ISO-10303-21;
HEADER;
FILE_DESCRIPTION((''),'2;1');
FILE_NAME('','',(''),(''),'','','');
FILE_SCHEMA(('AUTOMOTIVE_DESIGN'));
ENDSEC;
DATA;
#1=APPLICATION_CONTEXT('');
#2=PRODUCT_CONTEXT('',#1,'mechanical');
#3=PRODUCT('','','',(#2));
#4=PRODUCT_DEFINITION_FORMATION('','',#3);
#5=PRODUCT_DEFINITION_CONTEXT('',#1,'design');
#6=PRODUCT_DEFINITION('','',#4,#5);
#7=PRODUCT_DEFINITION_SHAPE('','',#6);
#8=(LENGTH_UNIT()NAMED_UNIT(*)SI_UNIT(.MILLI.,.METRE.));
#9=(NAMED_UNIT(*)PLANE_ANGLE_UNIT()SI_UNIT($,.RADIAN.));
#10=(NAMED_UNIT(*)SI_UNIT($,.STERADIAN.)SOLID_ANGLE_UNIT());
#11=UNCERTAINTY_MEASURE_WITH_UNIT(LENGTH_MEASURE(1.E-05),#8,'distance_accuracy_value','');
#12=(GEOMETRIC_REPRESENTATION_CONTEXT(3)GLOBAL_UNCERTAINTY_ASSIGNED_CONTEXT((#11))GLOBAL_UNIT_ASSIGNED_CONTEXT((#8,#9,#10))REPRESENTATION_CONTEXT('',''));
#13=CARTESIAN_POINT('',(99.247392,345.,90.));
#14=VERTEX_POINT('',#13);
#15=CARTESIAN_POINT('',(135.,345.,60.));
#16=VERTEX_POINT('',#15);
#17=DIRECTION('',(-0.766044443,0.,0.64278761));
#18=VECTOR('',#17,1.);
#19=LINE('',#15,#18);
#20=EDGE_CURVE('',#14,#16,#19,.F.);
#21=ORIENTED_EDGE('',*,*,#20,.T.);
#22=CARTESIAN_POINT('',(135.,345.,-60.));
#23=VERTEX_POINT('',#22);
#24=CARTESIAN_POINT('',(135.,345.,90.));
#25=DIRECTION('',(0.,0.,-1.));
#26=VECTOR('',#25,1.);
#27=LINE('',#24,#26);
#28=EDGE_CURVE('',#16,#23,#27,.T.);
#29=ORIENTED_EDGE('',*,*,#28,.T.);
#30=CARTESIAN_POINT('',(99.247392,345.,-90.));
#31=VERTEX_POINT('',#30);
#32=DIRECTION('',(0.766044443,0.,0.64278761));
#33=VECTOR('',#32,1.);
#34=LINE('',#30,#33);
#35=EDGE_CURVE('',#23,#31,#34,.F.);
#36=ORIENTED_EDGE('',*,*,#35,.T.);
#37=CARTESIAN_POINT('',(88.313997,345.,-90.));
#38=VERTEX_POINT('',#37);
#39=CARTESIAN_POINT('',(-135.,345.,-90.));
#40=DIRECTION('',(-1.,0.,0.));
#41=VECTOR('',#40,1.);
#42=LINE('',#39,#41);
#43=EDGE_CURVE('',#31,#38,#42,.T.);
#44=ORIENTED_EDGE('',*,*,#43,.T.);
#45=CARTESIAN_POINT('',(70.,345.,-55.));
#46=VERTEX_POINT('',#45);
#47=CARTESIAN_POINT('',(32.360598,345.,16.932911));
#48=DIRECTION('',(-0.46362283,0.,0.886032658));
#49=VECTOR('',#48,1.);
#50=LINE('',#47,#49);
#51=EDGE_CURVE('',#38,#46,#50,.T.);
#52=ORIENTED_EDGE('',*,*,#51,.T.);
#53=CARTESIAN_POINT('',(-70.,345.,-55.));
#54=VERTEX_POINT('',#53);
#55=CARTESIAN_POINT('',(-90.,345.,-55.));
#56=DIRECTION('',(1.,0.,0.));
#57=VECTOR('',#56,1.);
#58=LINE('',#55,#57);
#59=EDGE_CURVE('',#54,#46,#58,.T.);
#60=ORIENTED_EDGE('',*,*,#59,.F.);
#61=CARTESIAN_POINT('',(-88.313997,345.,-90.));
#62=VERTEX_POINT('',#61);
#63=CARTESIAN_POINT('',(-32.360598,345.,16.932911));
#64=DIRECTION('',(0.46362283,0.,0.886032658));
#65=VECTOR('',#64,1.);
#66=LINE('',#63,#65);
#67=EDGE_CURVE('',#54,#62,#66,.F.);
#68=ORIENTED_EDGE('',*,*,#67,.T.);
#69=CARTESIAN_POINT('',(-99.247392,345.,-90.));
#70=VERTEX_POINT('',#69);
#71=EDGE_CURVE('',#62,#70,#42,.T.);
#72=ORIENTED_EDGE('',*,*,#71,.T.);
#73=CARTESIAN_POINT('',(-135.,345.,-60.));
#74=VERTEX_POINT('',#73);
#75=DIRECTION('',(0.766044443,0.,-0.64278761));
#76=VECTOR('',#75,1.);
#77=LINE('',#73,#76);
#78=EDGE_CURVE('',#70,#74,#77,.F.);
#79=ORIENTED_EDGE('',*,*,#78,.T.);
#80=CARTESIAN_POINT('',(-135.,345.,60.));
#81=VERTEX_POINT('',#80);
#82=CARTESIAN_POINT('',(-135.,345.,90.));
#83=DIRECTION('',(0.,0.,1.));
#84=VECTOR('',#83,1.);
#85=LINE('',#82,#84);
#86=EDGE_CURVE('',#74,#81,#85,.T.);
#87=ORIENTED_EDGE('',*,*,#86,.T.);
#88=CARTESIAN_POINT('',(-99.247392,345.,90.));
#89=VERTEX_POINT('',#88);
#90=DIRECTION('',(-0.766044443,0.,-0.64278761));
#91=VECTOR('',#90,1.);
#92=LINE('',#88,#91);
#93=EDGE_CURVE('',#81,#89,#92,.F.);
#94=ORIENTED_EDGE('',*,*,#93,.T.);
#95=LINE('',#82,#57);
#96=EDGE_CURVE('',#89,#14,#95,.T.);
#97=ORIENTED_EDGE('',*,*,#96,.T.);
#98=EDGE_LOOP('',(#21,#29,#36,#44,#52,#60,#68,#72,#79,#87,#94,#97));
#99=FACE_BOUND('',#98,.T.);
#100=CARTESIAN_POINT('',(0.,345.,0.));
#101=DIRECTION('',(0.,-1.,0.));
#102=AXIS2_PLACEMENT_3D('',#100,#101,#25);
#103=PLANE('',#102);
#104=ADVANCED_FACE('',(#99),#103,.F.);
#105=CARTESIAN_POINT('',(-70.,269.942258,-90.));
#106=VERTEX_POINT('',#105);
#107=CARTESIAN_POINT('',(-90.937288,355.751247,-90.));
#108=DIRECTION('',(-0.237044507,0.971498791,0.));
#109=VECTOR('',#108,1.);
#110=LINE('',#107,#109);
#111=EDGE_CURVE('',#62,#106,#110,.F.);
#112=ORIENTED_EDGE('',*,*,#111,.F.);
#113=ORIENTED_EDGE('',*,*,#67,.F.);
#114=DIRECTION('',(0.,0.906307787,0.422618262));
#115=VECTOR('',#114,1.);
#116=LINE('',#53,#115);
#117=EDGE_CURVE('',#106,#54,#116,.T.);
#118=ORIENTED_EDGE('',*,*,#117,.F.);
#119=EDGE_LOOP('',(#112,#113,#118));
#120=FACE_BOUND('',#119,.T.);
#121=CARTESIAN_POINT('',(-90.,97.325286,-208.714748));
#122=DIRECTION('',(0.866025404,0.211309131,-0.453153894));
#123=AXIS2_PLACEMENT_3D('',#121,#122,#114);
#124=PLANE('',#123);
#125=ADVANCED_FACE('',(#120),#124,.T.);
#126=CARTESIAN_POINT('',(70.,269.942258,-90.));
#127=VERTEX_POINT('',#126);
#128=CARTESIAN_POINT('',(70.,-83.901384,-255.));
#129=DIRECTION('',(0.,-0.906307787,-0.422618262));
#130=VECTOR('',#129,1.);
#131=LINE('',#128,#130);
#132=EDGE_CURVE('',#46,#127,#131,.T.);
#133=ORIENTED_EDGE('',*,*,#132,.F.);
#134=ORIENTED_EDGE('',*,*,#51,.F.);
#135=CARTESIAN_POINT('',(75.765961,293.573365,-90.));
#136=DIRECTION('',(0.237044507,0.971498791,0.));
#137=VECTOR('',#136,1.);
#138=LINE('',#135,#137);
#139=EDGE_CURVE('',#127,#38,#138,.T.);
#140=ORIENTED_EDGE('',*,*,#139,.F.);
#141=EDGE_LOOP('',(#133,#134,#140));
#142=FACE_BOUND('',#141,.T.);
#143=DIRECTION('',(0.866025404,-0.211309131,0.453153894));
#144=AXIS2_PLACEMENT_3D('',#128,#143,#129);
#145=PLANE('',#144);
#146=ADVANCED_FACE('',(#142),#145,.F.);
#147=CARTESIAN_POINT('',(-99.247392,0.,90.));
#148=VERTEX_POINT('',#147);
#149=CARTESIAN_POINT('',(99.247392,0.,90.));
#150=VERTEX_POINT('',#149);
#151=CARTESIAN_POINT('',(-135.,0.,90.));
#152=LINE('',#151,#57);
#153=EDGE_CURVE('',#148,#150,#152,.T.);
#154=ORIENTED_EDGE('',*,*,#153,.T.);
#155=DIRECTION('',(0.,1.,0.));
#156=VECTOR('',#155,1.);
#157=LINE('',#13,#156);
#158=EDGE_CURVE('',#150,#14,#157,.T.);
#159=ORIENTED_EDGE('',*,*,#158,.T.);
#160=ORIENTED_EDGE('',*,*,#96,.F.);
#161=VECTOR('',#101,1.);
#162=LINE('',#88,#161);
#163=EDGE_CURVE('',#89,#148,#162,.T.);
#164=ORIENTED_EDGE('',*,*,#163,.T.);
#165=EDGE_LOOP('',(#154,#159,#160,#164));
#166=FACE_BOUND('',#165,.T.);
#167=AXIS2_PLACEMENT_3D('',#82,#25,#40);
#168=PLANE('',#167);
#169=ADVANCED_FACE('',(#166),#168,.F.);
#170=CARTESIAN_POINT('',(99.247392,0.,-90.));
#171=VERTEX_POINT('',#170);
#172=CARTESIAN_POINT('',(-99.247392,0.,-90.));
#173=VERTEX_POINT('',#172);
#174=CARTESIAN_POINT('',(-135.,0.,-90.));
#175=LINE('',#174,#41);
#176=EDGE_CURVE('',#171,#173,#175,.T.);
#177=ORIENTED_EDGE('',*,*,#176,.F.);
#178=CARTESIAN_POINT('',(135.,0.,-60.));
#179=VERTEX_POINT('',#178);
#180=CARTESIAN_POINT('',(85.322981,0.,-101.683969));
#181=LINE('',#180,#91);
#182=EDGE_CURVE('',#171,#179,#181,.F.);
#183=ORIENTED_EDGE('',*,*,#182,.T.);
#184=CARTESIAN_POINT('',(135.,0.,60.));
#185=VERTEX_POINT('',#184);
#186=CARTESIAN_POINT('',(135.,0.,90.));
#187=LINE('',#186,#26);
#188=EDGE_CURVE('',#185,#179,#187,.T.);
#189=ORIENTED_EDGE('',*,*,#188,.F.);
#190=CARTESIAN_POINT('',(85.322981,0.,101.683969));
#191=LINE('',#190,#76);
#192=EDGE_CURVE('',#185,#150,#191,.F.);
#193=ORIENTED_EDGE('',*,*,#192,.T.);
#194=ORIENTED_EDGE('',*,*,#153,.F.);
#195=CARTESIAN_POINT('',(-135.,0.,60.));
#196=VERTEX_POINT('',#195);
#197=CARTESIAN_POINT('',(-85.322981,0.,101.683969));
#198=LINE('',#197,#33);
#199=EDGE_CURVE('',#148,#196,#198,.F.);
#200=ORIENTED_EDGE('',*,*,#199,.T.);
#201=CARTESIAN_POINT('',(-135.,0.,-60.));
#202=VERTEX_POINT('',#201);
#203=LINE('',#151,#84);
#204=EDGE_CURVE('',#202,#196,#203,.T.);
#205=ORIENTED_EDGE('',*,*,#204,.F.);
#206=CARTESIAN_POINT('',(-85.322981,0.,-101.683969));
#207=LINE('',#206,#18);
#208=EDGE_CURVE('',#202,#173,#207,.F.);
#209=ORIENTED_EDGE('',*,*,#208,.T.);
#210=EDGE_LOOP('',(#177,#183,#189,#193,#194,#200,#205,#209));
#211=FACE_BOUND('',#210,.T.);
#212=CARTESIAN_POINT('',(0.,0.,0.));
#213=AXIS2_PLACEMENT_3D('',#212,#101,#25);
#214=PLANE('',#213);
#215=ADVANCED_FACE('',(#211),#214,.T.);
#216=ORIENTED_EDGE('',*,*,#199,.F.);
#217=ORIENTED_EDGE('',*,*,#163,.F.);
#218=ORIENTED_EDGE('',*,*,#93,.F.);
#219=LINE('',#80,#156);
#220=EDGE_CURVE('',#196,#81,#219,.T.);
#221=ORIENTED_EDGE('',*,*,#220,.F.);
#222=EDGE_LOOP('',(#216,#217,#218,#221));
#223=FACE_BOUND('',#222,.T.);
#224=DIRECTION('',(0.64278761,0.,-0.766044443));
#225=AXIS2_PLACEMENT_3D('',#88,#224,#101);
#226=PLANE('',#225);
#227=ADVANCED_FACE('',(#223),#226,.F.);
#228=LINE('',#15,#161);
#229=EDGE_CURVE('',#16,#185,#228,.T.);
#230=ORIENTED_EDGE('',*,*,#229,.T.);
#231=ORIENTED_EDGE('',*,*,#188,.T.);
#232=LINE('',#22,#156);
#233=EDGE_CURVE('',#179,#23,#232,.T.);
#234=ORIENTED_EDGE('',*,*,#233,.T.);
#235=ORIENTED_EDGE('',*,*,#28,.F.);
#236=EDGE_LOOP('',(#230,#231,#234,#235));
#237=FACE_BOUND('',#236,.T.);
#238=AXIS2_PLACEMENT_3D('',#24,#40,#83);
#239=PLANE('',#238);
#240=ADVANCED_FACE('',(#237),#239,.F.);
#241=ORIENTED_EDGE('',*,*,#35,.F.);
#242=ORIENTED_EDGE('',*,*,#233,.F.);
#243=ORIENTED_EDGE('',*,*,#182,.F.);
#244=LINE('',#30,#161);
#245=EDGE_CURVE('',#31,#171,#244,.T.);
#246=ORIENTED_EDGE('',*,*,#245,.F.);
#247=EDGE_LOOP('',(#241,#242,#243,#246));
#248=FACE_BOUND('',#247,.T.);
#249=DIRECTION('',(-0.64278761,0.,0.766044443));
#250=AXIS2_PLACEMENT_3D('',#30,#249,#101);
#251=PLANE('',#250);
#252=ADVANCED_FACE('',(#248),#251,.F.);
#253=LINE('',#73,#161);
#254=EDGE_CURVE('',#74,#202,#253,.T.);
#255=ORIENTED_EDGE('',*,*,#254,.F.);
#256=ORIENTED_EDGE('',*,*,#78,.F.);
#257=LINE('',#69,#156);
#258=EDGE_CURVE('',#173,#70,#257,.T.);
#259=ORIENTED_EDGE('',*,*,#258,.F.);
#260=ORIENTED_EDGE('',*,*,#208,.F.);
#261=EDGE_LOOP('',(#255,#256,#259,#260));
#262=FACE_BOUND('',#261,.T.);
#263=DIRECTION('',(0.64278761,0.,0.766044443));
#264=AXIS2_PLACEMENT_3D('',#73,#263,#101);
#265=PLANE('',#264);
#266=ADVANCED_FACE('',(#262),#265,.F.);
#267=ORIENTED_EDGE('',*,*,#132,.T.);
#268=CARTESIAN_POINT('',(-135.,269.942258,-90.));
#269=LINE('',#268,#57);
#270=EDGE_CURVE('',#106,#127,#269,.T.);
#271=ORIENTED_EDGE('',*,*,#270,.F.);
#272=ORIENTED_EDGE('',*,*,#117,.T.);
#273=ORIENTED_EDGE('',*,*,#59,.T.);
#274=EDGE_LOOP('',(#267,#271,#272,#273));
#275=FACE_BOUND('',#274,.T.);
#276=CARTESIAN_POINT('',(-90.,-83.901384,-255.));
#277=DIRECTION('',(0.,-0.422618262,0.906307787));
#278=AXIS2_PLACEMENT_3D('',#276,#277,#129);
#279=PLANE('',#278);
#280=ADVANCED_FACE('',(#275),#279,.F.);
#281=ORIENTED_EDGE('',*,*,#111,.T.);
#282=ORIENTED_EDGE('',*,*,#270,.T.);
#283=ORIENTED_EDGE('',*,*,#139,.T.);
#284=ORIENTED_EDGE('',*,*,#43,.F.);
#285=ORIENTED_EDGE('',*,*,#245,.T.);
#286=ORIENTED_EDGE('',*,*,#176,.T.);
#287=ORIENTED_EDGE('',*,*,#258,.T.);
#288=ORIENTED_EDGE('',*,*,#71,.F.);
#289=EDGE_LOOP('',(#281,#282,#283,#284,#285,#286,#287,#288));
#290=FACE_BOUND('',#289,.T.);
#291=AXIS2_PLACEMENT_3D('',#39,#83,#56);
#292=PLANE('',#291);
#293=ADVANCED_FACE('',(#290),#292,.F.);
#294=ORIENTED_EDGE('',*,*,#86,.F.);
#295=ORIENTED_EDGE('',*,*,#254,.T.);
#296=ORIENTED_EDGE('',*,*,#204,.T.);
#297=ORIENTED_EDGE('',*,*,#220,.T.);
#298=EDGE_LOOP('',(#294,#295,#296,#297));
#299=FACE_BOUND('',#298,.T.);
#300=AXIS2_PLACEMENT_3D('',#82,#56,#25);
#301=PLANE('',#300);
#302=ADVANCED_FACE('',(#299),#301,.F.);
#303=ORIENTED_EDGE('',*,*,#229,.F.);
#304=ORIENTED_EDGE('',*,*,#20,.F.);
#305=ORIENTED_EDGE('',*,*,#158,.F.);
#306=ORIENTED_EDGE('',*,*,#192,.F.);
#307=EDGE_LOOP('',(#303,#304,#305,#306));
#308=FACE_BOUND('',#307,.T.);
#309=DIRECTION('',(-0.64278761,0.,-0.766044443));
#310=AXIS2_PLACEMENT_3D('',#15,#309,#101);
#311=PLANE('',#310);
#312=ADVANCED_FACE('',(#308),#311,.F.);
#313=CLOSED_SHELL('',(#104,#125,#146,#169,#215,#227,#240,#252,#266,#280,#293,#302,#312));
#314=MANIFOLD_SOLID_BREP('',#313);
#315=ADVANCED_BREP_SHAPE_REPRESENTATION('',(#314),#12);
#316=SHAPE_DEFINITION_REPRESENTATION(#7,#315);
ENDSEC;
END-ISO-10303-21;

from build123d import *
from OCP.BRepFilletAPI import BRepFilletAPI_MakeChamfer

# Parameters (mm, degrees)
ESQUISSE1_W             = 270
ESQUISSE1_H             = 180
BOSS_EXTRU_1_DEPTH      = 345
CHANFREIN1_SIZE         = 30
CHANFREIN1_SIZE2        = 35.752607778
ENL_V_MAT_EXTRU_1_DEPTH = 90
CHANFREIN2_SIZE         = 20
CHANFREIN2_SIZE_2       = 34.641016151


with BuildPart() as part:
    # Esquisse1 → Boss.-Extru.1 (new body)
    with BuildSketch(Plane(origin=(0, 0, 0), x_dir=(1, 0, 0), z_dir=(0, 1, 0))):
        Rectangle(ESQUISSE1_W, ESQUISSE1_H)
    extrude(amount=BOSS_EXTRU_1_DEPTH)

    # Chanfrein1: one chamfer whose edges measure the first distance from different faces: ONE call of the kernel's chamfer builder (chamfer() names one face for all edges)
    chanfrein1_edges_1 = [part.edges().sort_by_distance(p)[0] for p in [
        (135, 172.5, 90),
        (135, 172.5, -90),
    ]]
    chanfrein1_side_1 = [part.faces().sort_by_distance(p)[0] for p in [
        (135, 172.5, 0),
    ]]
    chanfrein1_edges_2 = [part.edges().sort_by_distance(p)[0] for p in [
        (-135, 172.5, 90),
        (-135, 172.5, -90),
    ]]
    chanfrein1_side_2 = [part.faces().sort_by_distance(p)[0] for p in [
        (-135, 172.5, 0),
    ]]
    chanfrein1 = BRepFilletAPI_MakeChamfer(part.part.solid().wrapped)
    for e in chanfrein1_edges_1:
        chanfrein1.Add(CHANFREIN1_SIZE, CHANFREIN1_SIZE2, e.wrapped, chanfrein1_side_1[0].wrapped)  # the first distance lies on this face
    for e in chanfrein1_edges_2:
        chanfrein1.Add(CHANFREIN1_SIZE, CHANFREIN1_SIZE2, e.wrapped, chanfrein1_side_2[0].wrapped)  # the first distance lies on this face
    add(Compound.cast(chanfrein1.Shape()), mode=Mode.REPLACE)

    # Esquisse2 → Enlèv. mat.-Extru.1 (cut, symmetric)
    with BuildSketch(Plane(origin=(0, 0, 0), x_dir=(0, 0, -1), z_dir=(1, 0, 0))):
        Polygon((55, 345), (255, 345), (255, -83.901384102), align=None)
    extrude(amount=ENL_V_MAT_EXTRU_1_DEPTH, both=True, mode=Mode.SUBTRACT)

    # Chanfrein2
    # the kernel refuses this chamfer: 34.641016151, 20 mm, written as the material it adds along each edge
    with BuildSketch(Plane(origin=(90, 188.719606983, -127.874744083), x_dir=(-0.9983227437537926, -0.02446700349407226, 0.05246965831716883), z_dir=(0, 0.9063077870366479, 0.422618261740704))) as chanfrein2_piece_1_section:
        Polygon((CHANFREIN2_SIZE * 0.998322743754, -CHANFREIN2_SIZE * 0.0578938624027), (-CHANFREIN2_SIZE_2 * 0.0578938624033, -CHANFREIN2_SIZE_2 * 0.998322743765), (0, 0), align=None)
    chanfrein2_piece_1 = extrude(amount=262.055614234, mode=Mode.PRIVATE)
    chanfrein2_piece_1 = split(chanfrein2_piece_1, bisect_by=Plane(origin=(82.381838985, 345, -77.051948242), z_dir=(0, -1, 0)), keep=Keep.TOP, mode=Mode.PRIVATE)
    chanfrein2_piece_1 = split(chanfrein2_piece_1, bisect_by=Plane(origin=(82.381838985, 317.232813397, -90), z_dir=(0, 0, 1)), keep=Keep.TOP, mode=Mode.PRIVATE)
    add(chanfrein2_piece_1)
    with BuildSketch(Plane(origin=(-90, 188.719606983, -127.874744083), x_dir=(-0.0193267656127005, 0.42253932536473243, -0.906138507432097), z_dir=(0, 0.9063077870366479, 0.422618261740704))) as chanfrein2_piece_2_section:
        Polygon((CHANFREIN2_SIZE_2 * 0.999813220633, -CHANFREIN2_SIZE_2 * 0.0193267656129), (-CHANFREIN2_SIZE * 0.0193267656127, -CHANFREIN2_SIZE * 0.999813220622), (0, 0), align=None)
    chanfrein2_piece_2 = extrude(amount=262.055614234, mode=Mode.PRIVATE)
    chanfrein2_piece_2 = split(chanfrein2_piece_2, bisect_by=Plane(origin=(-82.381838985, 345, -77.051948242), z_dir=(0, -1, 0)), keep=Keep.TOP, mode=Mode.PRIVATE)
    chanfrein2_piece_2 = split(chanfrein2_piece_2, bisect_by=Plane(origin=(-82.381838985, 317.232813397, -90), z_dir=(0, 0, 1)), keep=Keep.TOP, mode=Mode.PRIVATE)
    add(chanfrein2_piece_2)


solid = part.part
